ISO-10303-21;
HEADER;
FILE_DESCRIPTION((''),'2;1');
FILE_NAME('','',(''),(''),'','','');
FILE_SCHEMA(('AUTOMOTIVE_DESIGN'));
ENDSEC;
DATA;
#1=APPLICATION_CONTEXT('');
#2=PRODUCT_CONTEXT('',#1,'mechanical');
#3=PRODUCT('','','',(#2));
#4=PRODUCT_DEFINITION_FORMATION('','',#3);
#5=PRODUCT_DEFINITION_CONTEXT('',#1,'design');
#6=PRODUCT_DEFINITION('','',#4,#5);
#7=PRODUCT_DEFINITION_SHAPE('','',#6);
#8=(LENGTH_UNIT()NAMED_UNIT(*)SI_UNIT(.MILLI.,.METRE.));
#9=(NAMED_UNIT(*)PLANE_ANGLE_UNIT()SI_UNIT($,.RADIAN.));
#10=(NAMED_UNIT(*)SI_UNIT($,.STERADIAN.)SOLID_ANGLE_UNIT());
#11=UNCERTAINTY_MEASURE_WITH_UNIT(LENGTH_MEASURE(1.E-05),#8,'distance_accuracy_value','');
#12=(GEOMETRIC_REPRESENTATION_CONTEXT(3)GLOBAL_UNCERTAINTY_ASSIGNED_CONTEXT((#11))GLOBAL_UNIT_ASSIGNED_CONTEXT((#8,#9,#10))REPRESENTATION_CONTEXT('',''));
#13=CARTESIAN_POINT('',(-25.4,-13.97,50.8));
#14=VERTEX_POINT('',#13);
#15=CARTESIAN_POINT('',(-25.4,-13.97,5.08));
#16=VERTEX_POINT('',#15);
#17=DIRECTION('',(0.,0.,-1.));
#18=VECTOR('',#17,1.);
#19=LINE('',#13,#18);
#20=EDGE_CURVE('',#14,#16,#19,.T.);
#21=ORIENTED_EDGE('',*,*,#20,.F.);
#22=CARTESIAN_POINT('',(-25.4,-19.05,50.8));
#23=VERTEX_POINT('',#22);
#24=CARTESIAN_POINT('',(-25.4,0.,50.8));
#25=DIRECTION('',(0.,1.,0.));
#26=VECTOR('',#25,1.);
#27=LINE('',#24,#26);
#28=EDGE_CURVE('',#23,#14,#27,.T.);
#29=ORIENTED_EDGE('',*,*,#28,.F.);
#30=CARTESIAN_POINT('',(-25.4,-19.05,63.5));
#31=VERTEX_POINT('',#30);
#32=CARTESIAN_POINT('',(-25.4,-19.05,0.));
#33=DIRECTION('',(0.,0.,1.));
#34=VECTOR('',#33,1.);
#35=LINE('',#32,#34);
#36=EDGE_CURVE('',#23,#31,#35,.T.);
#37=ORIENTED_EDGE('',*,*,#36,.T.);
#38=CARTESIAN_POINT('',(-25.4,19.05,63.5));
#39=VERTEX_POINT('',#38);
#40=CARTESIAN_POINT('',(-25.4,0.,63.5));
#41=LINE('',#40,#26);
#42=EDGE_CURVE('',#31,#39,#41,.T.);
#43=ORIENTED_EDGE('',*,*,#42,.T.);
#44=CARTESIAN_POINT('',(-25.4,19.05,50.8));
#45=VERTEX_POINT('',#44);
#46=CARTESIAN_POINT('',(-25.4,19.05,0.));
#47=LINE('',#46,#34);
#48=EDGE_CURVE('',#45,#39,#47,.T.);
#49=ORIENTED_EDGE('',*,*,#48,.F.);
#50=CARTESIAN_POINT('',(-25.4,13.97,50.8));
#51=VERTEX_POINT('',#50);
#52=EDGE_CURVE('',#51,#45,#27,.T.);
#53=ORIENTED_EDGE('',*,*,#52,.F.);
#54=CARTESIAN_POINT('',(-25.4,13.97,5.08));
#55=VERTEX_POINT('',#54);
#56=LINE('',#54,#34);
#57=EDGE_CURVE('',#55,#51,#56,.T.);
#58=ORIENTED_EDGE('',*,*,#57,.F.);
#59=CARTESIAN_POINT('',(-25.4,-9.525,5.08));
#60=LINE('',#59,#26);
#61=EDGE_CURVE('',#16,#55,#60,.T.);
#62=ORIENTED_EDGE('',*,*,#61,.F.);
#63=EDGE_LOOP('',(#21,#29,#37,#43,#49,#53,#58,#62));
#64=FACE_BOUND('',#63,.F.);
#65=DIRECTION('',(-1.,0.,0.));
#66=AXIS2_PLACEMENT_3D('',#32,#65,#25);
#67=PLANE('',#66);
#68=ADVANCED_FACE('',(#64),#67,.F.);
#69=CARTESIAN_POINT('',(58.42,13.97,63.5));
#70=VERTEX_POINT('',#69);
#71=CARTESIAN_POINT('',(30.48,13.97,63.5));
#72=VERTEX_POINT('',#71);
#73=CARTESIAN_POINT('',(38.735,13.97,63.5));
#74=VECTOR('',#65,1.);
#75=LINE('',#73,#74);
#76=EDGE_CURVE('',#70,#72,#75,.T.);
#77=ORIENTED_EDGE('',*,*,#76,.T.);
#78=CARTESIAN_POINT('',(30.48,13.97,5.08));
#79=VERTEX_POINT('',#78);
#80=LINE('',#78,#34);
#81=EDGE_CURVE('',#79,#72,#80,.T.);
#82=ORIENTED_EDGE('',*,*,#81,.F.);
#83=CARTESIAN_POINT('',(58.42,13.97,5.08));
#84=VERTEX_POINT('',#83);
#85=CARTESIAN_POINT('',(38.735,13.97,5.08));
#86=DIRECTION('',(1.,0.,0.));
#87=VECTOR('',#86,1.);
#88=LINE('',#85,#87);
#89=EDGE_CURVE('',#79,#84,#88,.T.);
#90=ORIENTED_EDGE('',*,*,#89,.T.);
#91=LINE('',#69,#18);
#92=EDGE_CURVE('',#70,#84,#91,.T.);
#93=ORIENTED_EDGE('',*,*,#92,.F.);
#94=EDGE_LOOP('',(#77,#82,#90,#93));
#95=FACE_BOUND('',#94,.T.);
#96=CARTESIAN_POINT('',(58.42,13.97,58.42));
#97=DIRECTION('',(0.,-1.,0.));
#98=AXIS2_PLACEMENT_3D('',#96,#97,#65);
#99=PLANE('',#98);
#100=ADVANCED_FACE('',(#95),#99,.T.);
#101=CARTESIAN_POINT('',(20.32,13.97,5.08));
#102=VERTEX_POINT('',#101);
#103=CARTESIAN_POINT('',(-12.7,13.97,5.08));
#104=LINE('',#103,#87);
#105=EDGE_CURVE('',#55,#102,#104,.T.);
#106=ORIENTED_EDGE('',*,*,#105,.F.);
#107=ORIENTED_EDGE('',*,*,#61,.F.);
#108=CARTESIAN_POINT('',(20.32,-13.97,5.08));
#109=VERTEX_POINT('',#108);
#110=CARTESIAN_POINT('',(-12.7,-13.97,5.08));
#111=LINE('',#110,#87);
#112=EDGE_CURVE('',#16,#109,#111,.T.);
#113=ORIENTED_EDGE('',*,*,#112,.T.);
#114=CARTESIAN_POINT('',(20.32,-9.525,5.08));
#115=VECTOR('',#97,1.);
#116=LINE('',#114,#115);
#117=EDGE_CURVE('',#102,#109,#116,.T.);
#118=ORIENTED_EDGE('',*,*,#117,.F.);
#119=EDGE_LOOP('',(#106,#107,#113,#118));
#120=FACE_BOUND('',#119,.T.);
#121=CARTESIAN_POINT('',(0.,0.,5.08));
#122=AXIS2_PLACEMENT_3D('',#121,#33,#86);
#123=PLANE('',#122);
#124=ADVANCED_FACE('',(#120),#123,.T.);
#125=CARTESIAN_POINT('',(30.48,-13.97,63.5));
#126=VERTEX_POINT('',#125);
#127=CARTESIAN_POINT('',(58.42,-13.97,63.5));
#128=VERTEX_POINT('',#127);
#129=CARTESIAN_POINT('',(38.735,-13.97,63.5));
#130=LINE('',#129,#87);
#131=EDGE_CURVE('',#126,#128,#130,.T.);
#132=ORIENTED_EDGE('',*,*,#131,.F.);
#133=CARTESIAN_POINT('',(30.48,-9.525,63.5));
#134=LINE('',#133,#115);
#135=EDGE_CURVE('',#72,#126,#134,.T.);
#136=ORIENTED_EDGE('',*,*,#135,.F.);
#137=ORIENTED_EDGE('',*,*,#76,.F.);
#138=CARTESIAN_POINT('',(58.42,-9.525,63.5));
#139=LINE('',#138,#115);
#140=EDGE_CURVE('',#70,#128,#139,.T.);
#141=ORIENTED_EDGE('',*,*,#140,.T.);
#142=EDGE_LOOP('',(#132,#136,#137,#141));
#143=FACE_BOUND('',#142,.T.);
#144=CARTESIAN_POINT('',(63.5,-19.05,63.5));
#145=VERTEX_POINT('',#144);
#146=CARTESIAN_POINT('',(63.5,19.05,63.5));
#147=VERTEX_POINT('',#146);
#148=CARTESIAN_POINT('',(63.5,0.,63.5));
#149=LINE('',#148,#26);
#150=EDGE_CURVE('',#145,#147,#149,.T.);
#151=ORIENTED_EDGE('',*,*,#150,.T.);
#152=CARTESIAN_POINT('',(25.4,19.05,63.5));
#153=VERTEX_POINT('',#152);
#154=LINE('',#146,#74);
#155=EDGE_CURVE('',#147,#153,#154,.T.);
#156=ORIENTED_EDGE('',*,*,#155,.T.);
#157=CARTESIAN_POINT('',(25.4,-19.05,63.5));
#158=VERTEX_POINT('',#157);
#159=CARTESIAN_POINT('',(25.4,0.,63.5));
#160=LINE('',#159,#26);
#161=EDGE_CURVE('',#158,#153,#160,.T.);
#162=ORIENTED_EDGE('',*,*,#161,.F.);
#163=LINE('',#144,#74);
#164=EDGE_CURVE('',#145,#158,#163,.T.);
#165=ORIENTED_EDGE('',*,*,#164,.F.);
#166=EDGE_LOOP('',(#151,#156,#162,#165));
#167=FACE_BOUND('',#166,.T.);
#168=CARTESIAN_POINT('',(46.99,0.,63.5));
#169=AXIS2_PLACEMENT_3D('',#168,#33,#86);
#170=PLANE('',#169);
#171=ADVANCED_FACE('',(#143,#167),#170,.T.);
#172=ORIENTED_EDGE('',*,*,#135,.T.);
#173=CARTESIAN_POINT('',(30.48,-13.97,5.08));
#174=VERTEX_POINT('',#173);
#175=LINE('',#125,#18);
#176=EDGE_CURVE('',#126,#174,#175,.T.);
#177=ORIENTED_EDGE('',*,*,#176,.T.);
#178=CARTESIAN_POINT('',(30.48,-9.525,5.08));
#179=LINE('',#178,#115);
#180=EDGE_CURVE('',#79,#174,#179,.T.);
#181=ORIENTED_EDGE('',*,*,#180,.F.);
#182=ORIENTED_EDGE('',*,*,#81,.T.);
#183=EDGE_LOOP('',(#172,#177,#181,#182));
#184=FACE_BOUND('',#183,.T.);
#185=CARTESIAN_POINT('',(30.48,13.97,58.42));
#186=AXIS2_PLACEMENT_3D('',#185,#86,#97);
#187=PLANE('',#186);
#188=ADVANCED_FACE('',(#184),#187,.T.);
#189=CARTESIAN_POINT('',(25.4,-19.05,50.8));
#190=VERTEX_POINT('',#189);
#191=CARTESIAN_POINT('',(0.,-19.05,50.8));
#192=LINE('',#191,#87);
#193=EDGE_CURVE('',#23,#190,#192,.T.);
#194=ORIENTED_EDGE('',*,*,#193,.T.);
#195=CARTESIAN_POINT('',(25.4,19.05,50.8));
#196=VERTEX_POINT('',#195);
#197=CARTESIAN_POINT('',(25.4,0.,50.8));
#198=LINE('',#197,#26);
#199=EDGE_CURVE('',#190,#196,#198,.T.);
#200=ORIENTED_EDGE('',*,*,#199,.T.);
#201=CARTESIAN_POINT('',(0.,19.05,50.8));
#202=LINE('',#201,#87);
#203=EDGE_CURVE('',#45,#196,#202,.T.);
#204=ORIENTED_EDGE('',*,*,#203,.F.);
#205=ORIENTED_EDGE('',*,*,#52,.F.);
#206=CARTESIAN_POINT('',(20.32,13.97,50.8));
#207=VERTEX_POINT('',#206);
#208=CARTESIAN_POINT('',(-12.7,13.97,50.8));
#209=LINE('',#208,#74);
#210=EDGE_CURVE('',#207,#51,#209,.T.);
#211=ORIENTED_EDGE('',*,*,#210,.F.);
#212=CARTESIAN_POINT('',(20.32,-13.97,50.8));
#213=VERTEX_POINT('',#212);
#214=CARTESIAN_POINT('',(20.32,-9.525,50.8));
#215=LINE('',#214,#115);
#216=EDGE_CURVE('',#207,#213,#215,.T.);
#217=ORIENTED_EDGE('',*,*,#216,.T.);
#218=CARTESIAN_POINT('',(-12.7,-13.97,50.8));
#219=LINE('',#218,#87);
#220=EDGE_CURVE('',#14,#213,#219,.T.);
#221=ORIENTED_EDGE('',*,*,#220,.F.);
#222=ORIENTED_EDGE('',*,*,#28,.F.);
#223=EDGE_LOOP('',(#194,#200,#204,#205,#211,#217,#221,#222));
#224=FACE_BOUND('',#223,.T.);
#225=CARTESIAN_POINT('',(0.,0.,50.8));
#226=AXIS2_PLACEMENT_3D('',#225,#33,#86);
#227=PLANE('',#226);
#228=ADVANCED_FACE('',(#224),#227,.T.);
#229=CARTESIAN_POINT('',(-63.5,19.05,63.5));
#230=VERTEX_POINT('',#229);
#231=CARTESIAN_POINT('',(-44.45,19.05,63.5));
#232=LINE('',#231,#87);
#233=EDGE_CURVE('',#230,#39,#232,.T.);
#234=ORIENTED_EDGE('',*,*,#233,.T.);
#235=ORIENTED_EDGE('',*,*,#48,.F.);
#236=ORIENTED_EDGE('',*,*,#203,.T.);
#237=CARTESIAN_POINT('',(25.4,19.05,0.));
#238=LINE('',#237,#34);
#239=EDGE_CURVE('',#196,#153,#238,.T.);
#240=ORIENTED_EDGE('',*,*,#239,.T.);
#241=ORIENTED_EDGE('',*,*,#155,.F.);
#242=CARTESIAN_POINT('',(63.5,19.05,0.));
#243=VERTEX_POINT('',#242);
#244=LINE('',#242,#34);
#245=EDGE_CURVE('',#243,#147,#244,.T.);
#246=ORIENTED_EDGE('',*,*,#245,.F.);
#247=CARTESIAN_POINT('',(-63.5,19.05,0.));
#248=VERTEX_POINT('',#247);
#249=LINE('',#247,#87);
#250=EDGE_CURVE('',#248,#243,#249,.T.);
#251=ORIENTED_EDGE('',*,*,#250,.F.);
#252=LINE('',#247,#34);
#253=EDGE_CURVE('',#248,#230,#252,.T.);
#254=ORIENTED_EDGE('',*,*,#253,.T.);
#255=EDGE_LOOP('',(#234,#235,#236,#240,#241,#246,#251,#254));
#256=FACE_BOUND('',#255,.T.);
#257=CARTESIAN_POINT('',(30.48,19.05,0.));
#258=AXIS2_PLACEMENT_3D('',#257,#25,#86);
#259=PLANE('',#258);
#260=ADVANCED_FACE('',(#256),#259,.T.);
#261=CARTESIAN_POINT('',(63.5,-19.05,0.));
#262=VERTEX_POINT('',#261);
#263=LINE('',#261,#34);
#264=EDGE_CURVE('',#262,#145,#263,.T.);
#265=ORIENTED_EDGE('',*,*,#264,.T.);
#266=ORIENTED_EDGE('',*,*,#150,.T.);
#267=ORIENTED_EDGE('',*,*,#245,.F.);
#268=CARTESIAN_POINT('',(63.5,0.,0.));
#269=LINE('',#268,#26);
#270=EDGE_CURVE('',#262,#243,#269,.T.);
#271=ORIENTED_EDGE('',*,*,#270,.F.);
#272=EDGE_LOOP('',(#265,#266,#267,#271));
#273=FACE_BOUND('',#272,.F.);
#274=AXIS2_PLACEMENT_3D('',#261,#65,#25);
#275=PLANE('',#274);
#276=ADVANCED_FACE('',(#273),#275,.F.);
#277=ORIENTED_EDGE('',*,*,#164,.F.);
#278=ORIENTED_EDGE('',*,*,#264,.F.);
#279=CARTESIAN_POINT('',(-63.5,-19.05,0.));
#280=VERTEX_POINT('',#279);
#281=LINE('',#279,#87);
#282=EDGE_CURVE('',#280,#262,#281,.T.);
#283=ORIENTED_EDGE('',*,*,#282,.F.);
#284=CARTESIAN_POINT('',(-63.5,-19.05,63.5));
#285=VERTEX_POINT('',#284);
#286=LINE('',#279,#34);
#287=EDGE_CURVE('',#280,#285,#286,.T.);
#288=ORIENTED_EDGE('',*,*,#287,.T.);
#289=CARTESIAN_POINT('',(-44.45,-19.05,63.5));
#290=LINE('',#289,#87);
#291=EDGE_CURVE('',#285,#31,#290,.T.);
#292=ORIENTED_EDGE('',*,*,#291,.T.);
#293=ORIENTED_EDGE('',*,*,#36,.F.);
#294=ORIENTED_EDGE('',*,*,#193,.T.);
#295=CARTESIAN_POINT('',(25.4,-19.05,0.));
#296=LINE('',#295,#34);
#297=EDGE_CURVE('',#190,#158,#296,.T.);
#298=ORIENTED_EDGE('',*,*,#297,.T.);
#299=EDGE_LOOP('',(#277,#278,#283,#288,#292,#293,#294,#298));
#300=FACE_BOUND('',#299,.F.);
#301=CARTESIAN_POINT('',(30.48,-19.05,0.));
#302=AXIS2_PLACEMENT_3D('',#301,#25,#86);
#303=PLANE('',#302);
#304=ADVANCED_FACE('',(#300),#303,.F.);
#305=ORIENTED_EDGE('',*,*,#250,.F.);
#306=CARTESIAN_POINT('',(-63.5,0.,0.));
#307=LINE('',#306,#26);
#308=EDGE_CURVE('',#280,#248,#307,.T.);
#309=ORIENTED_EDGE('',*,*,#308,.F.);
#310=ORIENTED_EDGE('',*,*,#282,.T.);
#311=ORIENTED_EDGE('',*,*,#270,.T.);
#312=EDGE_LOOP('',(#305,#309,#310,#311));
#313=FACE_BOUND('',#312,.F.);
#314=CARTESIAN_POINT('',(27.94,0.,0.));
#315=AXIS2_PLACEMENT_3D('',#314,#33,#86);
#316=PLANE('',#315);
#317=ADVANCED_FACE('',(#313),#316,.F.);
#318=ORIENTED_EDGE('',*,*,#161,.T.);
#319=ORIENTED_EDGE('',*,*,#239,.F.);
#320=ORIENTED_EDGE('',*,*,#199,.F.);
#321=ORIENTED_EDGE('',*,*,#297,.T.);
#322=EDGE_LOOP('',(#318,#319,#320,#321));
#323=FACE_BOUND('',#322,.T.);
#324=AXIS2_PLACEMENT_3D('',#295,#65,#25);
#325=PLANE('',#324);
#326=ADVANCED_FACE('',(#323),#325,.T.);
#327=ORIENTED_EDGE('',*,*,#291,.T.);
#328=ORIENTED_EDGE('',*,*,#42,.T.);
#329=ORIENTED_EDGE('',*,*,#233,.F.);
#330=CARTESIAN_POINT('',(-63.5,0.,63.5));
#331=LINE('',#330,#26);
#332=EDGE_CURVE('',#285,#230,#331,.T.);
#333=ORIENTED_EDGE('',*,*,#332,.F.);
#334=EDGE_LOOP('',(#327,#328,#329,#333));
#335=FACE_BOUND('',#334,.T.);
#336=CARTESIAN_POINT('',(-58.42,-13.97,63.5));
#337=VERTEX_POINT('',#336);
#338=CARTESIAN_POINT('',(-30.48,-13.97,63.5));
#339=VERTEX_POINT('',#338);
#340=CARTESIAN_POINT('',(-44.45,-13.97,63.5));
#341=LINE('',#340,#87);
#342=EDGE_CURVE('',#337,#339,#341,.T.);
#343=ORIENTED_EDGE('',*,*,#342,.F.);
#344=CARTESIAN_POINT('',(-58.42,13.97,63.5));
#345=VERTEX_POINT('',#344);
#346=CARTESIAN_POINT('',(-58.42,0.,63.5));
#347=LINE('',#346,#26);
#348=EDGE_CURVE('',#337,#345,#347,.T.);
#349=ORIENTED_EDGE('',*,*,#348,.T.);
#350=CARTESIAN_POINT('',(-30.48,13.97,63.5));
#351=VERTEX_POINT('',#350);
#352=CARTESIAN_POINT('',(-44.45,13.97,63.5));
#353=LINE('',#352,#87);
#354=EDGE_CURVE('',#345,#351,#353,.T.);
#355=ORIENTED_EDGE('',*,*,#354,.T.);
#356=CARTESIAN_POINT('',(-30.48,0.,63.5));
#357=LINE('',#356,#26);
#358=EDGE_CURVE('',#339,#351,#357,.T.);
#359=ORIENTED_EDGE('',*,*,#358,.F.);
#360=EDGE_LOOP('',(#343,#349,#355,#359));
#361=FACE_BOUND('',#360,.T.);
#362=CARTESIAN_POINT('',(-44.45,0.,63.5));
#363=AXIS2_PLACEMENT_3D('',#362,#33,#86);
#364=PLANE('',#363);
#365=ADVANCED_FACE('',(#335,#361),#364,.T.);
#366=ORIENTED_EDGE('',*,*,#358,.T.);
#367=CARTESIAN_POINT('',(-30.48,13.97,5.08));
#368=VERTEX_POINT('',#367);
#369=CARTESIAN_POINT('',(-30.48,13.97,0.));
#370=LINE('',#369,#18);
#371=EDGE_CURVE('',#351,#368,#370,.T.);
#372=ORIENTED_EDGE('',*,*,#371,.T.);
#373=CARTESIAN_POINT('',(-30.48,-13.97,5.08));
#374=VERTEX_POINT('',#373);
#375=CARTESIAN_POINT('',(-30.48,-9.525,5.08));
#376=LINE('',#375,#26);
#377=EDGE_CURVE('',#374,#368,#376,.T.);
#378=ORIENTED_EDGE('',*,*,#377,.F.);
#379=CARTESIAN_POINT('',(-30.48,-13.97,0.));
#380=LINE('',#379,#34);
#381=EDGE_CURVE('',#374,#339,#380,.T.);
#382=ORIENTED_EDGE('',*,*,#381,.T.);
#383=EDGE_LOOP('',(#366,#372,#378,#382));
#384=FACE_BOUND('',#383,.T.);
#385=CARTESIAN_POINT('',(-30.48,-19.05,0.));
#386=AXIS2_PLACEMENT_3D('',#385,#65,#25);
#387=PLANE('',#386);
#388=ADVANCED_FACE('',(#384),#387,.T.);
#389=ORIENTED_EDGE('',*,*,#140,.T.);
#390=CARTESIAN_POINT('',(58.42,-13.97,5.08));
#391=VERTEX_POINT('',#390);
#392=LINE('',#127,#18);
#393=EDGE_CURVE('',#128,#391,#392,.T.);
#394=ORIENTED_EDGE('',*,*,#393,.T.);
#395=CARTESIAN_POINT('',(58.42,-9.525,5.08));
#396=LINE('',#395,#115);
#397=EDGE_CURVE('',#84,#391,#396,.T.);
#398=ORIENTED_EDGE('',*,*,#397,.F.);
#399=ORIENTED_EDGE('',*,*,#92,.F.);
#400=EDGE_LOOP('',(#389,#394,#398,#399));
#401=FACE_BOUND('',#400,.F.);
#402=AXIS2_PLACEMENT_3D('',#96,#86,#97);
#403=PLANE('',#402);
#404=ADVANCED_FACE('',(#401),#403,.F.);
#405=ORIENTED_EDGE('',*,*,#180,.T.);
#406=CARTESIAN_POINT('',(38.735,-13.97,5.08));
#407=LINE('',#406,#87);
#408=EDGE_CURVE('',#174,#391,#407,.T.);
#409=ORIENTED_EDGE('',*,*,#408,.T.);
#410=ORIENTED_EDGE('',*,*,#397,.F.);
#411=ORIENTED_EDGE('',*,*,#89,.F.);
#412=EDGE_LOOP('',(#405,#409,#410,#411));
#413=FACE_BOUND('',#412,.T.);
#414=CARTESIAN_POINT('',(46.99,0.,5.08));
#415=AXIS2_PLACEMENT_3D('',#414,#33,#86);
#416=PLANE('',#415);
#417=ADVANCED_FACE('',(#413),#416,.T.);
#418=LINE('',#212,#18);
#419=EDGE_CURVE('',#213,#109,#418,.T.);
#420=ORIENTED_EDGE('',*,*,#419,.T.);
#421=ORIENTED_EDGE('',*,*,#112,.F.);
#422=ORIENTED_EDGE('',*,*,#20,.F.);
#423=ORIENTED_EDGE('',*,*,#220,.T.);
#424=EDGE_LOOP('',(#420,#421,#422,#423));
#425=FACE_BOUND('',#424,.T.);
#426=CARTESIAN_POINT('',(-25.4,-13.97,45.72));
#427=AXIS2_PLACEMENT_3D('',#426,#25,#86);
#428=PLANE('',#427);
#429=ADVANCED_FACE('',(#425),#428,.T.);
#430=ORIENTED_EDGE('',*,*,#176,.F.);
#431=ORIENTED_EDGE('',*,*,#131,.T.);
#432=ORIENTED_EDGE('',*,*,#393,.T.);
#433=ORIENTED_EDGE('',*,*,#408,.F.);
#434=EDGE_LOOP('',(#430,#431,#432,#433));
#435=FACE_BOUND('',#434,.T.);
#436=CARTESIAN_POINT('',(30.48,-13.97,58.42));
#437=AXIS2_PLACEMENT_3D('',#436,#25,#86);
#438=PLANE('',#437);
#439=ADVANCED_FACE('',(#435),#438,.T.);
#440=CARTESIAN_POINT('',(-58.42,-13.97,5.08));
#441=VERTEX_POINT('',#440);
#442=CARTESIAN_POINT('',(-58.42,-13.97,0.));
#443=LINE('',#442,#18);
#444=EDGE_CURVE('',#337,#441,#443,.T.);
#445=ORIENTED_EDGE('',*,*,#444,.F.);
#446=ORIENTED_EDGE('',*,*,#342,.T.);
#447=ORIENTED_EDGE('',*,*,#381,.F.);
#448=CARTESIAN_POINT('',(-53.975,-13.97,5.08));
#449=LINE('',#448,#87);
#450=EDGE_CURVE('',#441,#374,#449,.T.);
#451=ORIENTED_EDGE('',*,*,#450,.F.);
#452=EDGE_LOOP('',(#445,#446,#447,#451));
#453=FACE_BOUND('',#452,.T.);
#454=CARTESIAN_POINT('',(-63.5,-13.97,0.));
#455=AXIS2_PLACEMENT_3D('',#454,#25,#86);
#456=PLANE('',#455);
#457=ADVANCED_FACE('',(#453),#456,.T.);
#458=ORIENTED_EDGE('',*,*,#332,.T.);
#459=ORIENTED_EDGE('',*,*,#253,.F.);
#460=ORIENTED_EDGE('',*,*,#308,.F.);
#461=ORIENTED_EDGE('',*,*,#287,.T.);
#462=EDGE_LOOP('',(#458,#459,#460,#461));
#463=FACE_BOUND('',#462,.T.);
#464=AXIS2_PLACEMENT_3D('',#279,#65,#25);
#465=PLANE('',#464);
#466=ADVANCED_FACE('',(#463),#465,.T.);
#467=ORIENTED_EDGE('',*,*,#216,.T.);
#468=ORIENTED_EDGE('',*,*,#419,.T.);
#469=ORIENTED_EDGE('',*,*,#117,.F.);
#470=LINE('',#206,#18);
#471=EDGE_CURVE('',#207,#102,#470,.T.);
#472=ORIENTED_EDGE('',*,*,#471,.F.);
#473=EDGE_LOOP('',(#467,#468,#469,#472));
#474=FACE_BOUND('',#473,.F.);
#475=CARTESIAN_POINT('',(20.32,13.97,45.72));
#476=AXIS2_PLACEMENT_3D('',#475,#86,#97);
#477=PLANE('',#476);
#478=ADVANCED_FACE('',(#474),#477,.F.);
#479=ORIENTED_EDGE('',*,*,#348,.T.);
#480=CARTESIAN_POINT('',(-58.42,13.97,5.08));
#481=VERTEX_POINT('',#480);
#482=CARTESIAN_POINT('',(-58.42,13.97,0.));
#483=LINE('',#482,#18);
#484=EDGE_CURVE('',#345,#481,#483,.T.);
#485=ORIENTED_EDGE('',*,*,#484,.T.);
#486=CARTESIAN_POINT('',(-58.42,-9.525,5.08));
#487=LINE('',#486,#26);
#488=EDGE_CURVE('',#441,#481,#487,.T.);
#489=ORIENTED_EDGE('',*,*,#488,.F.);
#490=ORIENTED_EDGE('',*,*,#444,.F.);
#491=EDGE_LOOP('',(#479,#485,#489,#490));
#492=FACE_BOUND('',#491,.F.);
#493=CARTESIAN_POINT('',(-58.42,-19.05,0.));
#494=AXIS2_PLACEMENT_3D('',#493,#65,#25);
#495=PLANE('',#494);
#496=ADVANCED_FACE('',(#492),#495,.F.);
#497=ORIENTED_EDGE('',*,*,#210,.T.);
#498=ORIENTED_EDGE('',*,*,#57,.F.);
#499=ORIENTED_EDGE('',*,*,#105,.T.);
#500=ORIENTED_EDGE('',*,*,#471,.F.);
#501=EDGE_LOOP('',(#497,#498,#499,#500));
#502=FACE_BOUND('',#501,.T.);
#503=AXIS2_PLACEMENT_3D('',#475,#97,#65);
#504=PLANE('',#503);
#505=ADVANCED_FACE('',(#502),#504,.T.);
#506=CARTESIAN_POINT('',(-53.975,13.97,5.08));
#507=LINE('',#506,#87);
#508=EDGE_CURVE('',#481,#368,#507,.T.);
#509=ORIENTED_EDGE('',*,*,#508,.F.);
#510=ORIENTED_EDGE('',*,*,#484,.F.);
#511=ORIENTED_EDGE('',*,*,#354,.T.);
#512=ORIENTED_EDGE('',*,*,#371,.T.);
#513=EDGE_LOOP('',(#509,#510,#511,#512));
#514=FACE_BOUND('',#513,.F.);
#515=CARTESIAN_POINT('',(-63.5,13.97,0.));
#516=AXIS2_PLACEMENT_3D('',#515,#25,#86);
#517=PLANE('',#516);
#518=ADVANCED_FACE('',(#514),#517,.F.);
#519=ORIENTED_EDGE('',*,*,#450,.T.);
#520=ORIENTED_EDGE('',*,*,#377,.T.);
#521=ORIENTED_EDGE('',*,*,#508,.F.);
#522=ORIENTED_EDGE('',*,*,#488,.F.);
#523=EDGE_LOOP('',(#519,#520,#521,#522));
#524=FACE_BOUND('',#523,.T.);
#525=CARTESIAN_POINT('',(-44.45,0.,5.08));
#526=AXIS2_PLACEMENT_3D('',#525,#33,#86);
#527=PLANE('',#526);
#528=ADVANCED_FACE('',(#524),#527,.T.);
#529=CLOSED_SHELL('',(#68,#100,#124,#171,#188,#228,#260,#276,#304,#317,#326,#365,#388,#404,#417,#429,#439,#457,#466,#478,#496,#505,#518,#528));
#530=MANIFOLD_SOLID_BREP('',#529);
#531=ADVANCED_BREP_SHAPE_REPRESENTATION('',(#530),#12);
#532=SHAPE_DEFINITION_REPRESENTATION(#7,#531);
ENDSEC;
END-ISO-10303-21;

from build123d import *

# Parameters (mm, degrees)
F0_W      = 38.1
F0_H      = 38.1
F1_DEPTH  = 63.5
F2_T      = -5.08
F0_W_2    = 50.8
F3_DEPTH  = 50.8
F0_W_3    = 33.02
F4_DEPTH  = 63.5
F5_T      = -5.08
F0_W_4    = 5.08
F7_DEPTH  = 63.5
F8_DEPTH  = 63.5
F9_T      = -5.08
F10_DEPTH = 50.8


# Not quite as in the source:
# - a shell that OpenCascade refuses in one call is made with other operations: the cavity is built on its own and cut out


with BuildPart() as f1:
    # F0 (on Top) → F1 (new body)
    with BuildSketch(Plane.XY):
        with Locations((-44.45, 0)):
            Rectangle(F0_W, F0_H)
    extrude(amount=F1_DEPTH)

    # F2
    f2_openings = [f1.faces().sort_by_distance(p)[0] for p in [
        (-44.45, 0, 63.5),
    ]]
    offset(amount=F2_T, openings=f2_openings)

    # F0 (on Top) → F3 (join)
    with BuildSketch(Plane.XY):
        Rectangle(F0_W_2, F0_H)
    extrude(amount=F3_DEPTH)

    # F5: a shell. OpenCascade refuses it in one call, so the cavity is built on its own and cut out:
    # the body offset inwards by the wall thickness, plus a prism from it out through each open face.
    f5_core = offset(f1.part, amount=F5_T, kind=Kind.INTERSECTION, mode=Mode.PRIVATE)
    f5_exits = [f5_core.faces().sort_by_distance(p)[0] for p in [
        (-2.54, 0, 45.72),
    ]]
    add(f5_core, mode=Mode.SUBTRACT)
    extrude(f5_exits, amount=-F5_T, mode=Mode.SUBTRACT)

    # F0 (on Top) → F7 (join)
    with BuildSketch(Plane.XY):
        with Locations((27.94, 0)):
            Rectangle(F0_W_4, F0_H)
    extrude(amount=F7_DEPTH)

    # F0 (on Top) → F8 (join)
    with BuildSketch(Plane.XY):
        with Locations((46.99, 0)):
            Rectangle(F0_W_3, F0_H)
    extrude(amount=F8_DEPTH)

    # F9: a shell. OpenCascade refuses it in one call, so the cavity is built on its own and cut out:
    # the body offset inwards by the wall thickness, plus a prism from it out through each open face.
    f9_core = offset(f1.part, amount=F9_T, kind=Kind.INTERSECTION, mode=Mode.PRIVATE)
    f9_exits = [f9_core.faces().sort_by_distance(p)[0] for p in [
        (44.45, 0, 58.42),
    ]]
    add(f9_core, mode=Mode.SUBTRACT)
    extrude(f9_exits, amount=-F9_T, mode=Mode.SUBTRACT)

    # F0 (on Top) → F10 (join)
    with BuildSketch(Plane.XY):
        with Locations((27.94, 0)):
            Rectangle(F0_W_4, F0_H)
    extrude(amount=F10_DEPTH)


with BuildPart() as f4:
    # F0 (on Top) → F4 (new body)
    with BuildSketch(Plane.XY):
        with Locations((46.99, 0)):
            Rectangle(F0_W_3, F0_H)
    extrude(amount=F4_DEPTH)


solid = f1.part
